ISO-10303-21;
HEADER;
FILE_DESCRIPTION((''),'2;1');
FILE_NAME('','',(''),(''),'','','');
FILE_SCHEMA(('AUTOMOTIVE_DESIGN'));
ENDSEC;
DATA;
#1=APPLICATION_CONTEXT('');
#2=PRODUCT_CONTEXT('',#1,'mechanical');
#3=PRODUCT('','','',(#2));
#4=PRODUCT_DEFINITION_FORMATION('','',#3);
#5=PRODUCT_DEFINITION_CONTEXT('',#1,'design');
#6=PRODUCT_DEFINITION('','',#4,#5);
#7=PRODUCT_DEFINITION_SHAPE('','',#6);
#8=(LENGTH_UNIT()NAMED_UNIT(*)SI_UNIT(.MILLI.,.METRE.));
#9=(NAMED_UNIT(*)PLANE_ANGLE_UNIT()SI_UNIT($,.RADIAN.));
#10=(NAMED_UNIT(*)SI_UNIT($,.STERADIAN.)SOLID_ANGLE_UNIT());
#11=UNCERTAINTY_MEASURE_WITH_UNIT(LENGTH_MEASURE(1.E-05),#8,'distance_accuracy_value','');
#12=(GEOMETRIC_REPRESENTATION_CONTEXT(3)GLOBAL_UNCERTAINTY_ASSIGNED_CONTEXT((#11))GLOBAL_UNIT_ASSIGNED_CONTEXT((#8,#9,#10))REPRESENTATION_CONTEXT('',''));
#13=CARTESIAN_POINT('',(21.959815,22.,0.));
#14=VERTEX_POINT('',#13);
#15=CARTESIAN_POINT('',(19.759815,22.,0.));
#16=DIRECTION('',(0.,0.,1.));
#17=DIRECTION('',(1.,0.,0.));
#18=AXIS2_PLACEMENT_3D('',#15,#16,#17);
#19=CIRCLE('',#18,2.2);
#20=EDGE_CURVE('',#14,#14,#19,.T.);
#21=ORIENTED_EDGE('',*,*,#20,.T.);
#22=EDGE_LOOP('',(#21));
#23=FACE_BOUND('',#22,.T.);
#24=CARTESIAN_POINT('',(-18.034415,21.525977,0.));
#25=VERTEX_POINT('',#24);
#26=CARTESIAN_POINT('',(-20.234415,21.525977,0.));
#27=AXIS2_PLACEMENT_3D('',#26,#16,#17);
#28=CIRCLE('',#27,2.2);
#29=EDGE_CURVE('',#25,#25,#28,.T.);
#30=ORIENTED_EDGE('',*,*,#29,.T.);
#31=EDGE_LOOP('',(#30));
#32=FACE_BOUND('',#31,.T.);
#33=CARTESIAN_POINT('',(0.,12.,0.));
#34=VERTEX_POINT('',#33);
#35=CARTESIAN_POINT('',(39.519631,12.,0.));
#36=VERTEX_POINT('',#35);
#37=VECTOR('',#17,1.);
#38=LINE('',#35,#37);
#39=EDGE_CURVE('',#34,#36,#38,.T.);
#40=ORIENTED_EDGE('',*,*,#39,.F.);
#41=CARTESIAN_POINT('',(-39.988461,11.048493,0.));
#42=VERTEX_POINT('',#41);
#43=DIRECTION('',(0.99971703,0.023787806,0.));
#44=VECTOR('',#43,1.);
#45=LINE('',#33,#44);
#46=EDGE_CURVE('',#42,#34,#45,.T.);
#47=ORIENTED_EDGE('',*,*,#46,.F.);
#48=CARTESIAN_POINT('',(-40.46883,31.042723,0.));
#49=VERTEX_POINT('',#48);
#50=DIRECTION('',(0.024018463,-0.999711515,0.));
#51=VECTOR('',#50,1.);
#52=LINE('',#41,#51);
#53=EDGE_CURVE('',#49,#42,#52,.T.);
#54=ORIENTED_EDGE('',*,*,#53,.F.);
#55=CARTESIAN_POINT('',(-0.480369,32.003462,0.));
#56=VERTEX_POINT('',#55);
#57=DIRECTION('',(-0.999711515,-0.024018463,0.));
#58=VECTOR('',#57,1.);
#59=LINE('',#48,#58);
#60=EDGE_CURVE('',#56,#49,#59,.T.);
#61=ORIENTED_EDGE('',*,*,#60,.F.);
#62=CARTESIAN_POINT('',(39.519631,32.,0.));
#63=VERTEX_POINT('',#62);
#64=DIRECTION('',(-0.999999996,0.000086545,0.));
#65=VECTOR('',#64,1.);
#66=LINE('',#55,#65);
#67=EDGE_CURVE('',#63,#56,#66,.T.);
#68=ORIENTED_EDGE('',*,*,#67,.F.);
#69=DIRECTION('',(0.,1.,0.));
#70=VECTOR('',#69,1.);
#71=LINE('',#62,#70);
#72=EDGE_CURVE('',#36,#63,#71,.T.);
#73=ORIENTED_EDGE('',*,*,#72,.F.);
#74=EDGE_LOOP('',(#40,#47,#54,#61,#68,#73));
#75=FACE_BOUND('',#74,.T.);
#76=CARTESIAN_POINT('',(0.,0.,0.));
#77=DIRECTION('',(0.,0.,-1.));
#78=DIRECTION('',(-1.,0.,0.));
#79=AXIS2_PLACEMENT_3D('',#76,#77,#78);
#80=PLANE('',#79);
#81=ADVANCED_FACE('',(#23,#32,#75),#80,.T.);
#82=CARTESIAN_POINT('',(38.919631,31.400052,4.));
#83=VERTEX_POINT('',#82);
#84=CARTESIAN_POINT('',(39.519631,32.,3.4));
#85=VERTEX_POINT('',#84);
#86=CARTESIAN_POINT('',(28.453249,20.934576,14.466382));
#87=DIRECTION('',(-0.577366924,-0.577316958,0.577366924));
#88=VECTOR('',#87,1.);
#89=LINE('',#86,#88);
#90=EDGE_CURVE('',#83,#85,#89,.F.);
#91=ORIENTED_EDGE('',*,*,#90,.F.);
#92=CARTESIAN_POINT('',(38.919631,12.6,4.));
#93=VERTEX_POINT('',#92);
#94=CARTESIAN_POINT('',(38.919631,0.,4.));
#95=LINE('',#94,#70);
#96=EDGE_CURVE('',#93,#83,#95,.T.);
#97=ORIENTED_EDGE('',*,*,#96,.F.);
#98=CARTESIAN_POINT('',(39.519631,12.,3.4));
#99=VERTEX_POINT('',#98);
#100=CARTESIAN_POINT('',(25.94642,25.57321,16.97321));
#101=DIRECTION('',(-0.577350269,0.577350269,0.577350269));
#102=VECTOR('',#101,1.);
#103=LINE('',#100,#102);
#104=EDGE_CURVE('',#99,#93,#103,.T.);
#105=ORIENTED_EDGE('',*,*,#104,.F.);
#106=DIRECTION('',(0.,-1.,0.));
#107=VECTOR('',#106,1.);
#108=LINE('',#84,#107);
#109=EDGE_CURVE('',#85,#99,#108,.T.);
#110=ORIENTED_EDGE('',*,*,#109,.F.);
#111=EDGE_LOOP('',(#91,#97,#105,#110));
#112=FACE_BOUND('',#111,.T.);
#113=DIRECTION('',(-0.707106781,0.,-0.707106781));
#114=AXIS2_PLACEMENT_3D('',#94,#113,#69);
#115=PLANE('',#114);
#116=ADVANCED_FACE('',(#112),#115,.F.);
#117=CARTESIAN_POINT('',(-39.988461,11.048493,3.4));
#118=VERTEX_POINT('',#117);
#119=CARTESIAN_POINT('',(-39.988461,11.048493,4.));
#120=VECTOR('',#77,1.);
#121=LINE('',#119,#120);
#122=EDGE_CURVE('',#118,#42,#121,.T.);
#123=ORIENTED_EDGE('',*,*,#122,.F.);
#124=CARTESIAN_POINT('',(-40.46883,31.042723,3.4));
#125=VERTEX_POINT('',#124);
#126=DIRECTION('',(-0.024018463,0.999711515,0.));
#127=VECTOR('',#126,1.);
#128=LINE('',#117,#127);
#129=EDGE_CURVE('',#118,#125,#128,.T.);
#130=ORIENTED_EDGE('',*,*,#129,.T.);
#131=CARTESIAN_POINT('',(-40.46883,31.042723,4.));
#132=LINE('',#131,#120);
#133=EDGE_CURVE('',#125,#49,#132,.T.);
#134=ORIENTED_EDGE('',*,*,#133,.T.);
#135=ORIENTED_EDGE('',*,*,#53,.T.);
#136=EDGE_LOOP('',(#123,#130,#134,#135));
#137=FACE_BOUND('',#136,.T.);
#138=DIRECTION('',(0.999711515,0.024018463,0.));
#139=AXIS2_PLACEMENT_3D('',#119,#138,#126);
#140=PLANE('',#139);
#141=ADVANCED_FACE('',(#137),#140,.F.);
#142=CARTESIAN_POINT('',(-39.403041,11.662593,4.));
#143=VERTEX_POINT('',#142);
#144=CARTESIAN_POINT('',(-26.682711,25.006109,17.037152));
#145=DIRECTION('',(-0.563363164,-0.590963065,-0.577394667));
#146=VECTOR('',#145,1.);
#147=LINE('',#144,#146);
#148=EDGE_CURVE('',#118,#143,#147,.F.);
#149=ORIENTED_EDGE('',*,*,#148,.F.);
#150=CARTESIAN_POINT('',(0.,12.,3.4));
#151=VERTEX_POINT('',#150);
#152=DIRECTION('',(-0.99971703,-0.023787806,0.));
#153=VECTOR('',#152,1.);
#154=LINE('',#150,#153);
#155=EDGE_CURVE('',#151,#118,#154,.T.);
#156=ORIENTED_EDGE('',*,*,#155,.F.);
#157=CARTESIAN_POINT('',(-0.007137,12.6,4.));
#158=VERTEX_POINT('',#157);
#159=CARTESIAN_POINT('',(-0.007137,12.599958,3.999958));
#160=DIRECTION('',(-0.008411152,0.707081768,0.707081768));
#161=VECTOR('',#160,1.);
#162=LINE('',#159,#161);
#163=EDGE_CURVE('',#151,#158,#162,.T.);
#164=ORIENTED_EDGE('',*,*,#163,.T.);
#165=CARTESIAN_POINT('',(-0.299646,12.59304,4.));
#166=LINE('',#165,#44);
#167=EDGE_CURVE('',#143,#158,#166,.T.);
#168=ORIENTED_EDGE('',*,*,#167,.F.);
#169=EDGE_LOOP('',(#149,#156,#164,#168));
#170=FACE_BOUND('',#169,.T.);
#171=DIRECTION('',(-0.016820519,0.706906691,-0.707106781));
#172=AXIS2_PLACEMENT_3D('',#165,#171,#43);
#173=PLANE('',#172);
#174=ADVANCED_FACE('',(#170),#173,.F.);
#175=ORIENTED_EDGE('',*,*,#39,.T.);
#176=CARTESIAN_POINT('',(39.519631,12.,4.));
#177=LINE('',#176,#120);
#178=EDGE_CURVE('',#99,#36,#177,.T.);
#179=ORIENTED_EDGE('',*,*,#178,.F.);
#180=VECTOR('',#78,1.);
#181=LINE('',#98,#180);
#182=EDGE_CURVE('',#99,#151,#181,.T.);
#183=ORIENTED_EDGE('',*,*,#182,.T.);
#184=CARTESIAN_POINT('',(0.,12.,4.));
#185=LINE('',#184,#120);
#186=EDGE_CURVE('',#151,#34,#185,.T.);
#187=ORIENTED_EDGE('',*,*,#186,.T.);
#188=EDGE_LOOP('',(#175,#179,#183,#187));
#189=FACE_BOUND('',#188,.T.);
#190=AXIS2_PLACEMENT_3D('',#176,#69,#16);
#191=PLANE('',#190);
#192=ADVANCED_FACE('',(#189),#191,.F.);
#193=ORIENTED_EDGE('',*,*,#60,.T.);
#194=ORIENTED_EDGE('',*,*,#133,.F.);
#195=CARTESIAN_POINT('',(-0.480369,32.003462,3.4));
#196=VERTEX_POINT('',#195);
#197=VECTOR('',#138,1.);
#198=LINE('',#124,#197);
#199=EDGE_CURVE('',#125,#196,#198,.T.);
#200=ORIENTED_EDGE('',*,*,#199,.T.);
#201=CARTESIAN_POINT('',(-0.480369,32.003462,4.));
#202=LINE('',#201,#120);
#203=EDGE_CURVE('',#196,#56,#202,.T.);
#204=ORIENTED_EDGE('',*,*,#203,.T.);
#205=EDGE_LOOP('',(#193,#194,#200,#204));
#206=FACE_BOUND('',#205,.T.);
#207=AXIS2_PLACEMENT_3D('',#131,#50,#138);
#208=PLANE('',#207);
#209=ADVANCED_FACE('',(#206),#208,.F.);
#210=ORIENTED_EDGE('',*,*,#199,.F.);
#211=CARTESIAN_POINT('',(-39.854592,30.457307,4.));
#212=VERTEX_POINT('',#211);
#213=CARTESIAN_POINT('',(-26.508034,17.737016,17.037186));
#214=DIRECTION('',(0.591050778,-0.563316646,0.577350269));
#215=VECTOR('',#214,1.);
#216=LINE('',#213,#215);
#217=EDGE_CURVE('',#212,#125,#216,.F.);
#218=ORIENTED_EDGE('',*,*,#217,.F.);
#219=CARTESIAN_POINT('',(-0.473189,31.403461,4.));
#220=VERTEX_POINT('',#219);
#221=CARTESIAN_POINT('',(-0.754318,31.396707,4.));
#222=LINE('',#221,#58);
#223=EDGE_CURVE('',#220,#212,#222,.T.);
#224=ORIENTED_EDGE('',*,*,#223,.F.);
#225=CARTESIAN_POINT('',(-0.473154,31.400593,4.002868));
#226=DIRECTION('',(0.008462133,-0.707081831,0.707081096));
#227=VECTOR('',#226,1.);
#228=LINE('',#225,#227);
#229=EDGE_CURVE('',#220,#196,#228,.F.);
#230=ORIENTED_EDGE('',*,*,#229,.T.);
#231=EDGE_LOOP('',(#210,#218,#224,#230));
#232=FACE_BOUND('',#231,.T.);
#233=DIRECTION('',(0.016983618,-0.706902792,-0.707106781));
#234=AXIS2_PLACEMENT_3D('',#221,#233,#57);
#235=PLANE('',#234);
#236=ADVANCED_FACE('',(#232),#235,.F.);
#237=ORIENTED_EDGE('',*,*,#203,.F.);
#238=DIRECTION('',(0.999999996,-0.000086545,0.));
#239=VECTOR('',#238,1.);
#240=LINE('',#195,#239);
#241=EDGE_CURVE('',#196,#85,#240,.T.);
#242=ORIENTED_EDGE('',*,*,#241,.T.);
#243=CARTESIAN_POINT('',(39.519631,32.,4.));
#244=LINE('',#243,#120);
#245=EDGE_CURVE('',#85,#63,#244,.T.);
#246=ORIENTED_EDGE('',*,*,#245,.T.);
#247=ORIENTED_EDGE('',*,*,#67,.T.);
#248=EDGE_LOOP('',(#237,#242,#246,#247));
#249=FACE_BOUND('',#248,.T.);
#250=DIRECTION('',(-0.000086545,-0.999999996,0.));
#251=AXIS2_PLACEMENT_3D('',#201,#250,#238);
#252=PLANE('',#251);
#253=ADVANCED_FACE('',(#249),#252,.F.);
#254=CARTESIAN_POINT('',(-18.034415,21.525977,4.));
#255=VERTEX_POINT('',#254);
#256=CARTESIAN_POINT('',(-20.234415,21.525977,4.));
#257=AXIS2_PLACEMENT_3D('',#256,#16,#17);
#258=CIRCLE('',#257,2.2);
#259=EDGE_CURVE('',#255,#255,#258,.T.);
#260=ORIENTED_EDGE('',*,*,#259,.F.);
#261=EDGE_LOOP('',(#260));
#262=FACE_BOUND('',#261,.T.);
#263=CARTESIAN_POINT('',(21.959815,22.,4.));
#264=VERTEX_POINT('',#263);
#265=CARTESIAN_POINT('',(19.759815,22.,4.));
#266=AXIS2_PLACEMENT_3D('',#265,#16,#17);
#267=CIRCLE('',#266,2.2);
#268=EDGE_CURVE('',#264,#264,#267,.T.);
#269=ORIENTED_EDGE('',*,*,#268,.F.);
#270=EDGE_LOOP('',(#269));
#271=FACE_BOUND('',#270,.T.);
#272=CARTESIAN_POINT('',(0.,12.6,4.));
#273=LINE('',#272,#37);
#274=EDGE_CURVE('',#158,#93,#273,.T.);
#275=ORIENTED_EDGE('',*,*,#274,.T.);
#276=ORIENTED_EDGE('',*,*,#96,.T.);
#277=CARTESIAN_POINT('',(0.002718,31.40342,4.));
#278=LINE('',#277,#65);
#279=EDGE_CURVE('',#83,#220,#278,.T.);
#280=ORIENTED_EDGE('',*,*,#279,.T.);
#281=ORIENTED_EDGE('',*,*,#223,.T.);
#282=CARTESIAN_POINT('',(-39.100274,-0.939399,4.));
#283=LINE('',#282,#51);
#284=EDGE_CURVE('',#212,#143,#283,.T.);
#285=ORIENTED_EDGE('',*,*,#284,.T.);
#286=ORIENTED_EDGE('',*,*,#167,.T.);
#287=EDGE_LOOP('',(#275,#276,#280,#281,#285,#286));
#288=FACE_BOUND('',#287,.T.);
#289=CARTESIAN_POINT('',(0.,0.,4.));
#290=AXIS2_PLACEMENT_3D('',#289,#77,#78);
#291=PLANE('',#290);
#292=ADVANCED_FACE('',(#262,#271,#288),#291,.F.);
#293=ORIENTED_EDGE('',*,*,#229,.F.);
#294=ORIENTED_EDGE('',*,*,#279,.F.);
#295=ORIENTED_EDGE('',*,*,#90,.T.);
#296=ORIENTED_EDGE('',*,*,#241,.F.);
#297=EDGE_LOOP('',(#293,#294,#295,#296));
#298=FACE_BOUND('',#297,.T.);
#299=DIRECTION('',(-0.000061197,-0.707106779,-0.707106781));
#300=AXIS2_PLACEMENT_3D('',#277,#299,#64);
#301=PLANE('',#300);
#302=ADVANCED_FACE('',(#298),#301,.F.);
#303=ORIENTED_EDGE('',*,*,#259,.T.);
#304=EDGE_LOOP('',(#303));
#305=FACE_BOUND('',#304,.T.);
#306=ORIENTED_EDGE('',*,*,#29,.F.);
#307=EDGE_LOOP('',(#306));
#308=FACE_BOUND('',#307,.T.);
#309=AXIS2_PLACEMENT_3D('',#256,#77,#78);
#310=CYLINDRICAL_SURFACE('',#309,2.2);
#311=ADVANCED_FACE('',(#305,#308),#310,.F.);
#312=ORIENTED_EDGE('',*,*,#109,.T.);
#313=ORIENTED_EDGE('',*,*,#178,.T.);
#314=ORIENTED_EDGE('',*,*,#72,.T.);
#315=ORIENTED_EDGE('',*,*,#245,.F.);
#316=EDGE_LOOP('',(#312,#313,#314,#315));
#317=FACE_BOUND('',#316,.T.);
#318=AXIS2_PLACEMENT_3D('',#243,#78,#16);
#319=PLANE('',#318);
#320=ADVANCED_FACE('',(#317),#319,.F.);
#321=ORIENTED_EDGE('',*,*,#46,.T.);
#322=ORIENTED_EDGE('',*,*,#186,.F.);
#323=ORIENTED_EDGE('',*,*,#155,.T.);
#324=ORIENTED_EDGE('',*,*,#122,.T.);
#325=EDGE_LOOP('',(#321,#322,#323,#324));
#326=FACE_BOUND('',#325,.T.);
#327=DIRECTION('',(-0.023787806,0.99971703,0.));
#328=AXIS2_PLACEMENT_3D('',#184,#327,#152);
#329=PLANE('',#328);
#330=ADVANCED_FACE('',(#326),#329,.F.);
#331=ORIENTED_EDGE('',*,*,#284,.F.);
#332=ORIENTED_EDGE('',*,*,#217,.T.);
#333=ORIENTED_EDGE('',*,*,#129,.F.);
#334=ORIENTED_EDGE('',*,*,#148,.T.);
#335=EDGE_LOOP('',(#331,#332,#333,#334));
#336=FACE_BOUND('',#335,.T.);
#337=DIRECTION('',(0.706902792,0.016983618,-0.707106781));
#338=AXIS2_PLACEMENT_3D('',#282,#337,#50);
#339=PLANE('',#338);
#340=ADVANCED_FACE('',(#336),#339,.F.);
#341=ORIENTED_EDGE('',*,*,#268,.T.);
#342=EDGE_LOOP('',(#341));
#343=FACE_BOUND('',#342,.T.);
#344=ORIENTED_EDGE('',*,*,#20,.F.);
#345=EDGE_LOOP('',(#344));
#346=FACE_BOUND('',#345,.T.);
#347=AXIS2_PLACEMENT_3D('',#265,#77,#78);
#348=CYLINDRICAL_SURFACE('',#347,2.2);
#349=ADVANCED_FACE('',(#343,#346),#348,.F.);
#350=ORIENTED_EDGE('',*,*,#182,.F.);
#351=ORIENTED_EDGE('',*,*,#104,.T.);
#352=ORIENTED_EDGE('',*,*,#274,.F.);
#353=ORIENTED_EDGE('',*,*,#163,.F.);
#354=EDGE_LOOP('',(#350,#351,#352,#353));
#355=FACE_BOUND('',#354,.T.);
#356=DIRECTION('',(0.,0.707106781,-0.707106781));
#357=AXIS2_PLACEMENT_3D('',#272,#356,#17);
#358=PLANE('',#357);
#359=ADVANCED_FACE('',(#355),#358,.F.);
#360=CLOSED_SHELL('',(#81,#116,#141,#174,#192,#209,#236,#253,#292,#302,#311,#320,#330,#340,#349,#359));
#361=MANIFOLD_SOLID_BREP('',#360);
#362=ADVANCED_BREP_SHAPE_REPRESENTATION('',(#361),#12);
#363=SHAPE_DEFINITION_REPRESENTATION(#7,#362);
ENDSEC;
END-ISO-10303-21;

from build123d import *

# Parameters (mm, degrees)
SKETCH3_R           = 2.2
BOSS_EXTRUDE1_DEPTH = 4
CHAMFER1_SIZE       = 0.6


with BuildPart() as part:
    # Sketch3 → Boss-Extrude1 (new body)
    with BuildSketch(Plane.XY):
        Polygon((-39.988460604, 11.048492995), (-40.468829865, 31.042723297), (-0.480369261, 32.003461819), (39.51963059, 32), (39.51963059, 12), (0, 12), align=None)
        with Locations((19.759815295, 22)):
            Circle(SKETCH3_R, mode=Mode.SUBTRACT)
        with Locations((-20.234414932, 21.525977407)):
            Circle(SKETCH3_R, mode=Mode.SUBTRACT)
    extrude(amount=BOSS_EXTRUDE1_DEPTH)

    # Chamfer1
    # the kernel refuses this chamfer: 0.6 mm, written as the material it takes off along each edge
    with BuildSketch(Plane(origin=(39.51963059, 33.543009793, 4), x_dir=(0, 0, -1), z_dir=(0, -1, 0)), Plane(origin=(-39.951399881, 9.505928338, 4), x_dir=(0, 0, -1), z_dir=(-0.024018463033284497, 0.9997115151049921, 0))) as chamfer1_piece_1:
        Polygon((CHAMFER1_SIZE, 0), (0, -CHAMFER1_SIZE), (0, 0), align=None)
    extrude(amount=23.086019586, mode=Mode.SUBTRACT)
    with BuildSketch(Plane(origin=(-2.023379048, 32.003595359, 4), x_dir=(0, 0, -1), z_dir=(0.999999996254941, -8.654546850213052e-05, 0)), Plane(origin=(-42.011394523, 31.005662574, 4), x_dir=(0, 0, -1), z_dir=(0.9997115151049922, 0.02401846303328057, 0))) as chamfer1_piece_2:
        Polygon((CHAMFER1_SIZE, 0), (0, -CHAMFER1_SIZE), (0, 0), align=None)
    extrude(amount=43.086019586, mode=Mode.SUBTRACT)
    with BuildSketch(Plane(origin=(1.542573167, 12.036704818, 4), x_dir=(0, 0, -1), z_dir=(-0.9997170300986874, -0.023787806344009378, 0))) as chamfer1_piece_3_section:
        Polygon((CHAMFER1_SIZE, 0), (0, -CHAMFER1_SIZE), (0, 0), align=None)
    chamfer1_piece_3 = extrude(amount=43.085798923, mode=Mode.PRIVATE)
    chamfer1_piece_3 = split(chamfer1_piece_3, bisect_by=Plane(origin=(1.542573167, 12.318352409, 3.718352409), z_dir=(0, -0.7071067811865478, 0.7071067811865474)), keep=Keep.TOP, mode=Mode.PRIVATE)
    add(chamfer1_piece_3, mode=Mode.SUBTRACT)
    with BuildSketch(Plane(origin=(41.062640382, 12, 4), x_dir=(0, 0, -1), z_dir=(-1, 0, 0))) as chamfer1_piece_4_section:
        Polygon((CHAMFER1_SIZE, 0), (0, -CHAMFER1_SIZE), (0, 0), align=None)
    chamfer1_piece_4 = extrude(amount=42.605650175, mode=Mode.PRIVATE)
    chamfer1_piece_4 = split(chamfer1_piece_4, bisect_by=Plane(origin=(41.043886193, 12.788171977, 3.211604931), z_dir=(0.01682051917540141, -0.706906691250458, 0.7071067811865475)), keep=Keep.TOP, mode=Mode.PRIVATE)
    add(chamfer1_piece_4, mode=Mode.SUBTRACT)


solid = part.part
